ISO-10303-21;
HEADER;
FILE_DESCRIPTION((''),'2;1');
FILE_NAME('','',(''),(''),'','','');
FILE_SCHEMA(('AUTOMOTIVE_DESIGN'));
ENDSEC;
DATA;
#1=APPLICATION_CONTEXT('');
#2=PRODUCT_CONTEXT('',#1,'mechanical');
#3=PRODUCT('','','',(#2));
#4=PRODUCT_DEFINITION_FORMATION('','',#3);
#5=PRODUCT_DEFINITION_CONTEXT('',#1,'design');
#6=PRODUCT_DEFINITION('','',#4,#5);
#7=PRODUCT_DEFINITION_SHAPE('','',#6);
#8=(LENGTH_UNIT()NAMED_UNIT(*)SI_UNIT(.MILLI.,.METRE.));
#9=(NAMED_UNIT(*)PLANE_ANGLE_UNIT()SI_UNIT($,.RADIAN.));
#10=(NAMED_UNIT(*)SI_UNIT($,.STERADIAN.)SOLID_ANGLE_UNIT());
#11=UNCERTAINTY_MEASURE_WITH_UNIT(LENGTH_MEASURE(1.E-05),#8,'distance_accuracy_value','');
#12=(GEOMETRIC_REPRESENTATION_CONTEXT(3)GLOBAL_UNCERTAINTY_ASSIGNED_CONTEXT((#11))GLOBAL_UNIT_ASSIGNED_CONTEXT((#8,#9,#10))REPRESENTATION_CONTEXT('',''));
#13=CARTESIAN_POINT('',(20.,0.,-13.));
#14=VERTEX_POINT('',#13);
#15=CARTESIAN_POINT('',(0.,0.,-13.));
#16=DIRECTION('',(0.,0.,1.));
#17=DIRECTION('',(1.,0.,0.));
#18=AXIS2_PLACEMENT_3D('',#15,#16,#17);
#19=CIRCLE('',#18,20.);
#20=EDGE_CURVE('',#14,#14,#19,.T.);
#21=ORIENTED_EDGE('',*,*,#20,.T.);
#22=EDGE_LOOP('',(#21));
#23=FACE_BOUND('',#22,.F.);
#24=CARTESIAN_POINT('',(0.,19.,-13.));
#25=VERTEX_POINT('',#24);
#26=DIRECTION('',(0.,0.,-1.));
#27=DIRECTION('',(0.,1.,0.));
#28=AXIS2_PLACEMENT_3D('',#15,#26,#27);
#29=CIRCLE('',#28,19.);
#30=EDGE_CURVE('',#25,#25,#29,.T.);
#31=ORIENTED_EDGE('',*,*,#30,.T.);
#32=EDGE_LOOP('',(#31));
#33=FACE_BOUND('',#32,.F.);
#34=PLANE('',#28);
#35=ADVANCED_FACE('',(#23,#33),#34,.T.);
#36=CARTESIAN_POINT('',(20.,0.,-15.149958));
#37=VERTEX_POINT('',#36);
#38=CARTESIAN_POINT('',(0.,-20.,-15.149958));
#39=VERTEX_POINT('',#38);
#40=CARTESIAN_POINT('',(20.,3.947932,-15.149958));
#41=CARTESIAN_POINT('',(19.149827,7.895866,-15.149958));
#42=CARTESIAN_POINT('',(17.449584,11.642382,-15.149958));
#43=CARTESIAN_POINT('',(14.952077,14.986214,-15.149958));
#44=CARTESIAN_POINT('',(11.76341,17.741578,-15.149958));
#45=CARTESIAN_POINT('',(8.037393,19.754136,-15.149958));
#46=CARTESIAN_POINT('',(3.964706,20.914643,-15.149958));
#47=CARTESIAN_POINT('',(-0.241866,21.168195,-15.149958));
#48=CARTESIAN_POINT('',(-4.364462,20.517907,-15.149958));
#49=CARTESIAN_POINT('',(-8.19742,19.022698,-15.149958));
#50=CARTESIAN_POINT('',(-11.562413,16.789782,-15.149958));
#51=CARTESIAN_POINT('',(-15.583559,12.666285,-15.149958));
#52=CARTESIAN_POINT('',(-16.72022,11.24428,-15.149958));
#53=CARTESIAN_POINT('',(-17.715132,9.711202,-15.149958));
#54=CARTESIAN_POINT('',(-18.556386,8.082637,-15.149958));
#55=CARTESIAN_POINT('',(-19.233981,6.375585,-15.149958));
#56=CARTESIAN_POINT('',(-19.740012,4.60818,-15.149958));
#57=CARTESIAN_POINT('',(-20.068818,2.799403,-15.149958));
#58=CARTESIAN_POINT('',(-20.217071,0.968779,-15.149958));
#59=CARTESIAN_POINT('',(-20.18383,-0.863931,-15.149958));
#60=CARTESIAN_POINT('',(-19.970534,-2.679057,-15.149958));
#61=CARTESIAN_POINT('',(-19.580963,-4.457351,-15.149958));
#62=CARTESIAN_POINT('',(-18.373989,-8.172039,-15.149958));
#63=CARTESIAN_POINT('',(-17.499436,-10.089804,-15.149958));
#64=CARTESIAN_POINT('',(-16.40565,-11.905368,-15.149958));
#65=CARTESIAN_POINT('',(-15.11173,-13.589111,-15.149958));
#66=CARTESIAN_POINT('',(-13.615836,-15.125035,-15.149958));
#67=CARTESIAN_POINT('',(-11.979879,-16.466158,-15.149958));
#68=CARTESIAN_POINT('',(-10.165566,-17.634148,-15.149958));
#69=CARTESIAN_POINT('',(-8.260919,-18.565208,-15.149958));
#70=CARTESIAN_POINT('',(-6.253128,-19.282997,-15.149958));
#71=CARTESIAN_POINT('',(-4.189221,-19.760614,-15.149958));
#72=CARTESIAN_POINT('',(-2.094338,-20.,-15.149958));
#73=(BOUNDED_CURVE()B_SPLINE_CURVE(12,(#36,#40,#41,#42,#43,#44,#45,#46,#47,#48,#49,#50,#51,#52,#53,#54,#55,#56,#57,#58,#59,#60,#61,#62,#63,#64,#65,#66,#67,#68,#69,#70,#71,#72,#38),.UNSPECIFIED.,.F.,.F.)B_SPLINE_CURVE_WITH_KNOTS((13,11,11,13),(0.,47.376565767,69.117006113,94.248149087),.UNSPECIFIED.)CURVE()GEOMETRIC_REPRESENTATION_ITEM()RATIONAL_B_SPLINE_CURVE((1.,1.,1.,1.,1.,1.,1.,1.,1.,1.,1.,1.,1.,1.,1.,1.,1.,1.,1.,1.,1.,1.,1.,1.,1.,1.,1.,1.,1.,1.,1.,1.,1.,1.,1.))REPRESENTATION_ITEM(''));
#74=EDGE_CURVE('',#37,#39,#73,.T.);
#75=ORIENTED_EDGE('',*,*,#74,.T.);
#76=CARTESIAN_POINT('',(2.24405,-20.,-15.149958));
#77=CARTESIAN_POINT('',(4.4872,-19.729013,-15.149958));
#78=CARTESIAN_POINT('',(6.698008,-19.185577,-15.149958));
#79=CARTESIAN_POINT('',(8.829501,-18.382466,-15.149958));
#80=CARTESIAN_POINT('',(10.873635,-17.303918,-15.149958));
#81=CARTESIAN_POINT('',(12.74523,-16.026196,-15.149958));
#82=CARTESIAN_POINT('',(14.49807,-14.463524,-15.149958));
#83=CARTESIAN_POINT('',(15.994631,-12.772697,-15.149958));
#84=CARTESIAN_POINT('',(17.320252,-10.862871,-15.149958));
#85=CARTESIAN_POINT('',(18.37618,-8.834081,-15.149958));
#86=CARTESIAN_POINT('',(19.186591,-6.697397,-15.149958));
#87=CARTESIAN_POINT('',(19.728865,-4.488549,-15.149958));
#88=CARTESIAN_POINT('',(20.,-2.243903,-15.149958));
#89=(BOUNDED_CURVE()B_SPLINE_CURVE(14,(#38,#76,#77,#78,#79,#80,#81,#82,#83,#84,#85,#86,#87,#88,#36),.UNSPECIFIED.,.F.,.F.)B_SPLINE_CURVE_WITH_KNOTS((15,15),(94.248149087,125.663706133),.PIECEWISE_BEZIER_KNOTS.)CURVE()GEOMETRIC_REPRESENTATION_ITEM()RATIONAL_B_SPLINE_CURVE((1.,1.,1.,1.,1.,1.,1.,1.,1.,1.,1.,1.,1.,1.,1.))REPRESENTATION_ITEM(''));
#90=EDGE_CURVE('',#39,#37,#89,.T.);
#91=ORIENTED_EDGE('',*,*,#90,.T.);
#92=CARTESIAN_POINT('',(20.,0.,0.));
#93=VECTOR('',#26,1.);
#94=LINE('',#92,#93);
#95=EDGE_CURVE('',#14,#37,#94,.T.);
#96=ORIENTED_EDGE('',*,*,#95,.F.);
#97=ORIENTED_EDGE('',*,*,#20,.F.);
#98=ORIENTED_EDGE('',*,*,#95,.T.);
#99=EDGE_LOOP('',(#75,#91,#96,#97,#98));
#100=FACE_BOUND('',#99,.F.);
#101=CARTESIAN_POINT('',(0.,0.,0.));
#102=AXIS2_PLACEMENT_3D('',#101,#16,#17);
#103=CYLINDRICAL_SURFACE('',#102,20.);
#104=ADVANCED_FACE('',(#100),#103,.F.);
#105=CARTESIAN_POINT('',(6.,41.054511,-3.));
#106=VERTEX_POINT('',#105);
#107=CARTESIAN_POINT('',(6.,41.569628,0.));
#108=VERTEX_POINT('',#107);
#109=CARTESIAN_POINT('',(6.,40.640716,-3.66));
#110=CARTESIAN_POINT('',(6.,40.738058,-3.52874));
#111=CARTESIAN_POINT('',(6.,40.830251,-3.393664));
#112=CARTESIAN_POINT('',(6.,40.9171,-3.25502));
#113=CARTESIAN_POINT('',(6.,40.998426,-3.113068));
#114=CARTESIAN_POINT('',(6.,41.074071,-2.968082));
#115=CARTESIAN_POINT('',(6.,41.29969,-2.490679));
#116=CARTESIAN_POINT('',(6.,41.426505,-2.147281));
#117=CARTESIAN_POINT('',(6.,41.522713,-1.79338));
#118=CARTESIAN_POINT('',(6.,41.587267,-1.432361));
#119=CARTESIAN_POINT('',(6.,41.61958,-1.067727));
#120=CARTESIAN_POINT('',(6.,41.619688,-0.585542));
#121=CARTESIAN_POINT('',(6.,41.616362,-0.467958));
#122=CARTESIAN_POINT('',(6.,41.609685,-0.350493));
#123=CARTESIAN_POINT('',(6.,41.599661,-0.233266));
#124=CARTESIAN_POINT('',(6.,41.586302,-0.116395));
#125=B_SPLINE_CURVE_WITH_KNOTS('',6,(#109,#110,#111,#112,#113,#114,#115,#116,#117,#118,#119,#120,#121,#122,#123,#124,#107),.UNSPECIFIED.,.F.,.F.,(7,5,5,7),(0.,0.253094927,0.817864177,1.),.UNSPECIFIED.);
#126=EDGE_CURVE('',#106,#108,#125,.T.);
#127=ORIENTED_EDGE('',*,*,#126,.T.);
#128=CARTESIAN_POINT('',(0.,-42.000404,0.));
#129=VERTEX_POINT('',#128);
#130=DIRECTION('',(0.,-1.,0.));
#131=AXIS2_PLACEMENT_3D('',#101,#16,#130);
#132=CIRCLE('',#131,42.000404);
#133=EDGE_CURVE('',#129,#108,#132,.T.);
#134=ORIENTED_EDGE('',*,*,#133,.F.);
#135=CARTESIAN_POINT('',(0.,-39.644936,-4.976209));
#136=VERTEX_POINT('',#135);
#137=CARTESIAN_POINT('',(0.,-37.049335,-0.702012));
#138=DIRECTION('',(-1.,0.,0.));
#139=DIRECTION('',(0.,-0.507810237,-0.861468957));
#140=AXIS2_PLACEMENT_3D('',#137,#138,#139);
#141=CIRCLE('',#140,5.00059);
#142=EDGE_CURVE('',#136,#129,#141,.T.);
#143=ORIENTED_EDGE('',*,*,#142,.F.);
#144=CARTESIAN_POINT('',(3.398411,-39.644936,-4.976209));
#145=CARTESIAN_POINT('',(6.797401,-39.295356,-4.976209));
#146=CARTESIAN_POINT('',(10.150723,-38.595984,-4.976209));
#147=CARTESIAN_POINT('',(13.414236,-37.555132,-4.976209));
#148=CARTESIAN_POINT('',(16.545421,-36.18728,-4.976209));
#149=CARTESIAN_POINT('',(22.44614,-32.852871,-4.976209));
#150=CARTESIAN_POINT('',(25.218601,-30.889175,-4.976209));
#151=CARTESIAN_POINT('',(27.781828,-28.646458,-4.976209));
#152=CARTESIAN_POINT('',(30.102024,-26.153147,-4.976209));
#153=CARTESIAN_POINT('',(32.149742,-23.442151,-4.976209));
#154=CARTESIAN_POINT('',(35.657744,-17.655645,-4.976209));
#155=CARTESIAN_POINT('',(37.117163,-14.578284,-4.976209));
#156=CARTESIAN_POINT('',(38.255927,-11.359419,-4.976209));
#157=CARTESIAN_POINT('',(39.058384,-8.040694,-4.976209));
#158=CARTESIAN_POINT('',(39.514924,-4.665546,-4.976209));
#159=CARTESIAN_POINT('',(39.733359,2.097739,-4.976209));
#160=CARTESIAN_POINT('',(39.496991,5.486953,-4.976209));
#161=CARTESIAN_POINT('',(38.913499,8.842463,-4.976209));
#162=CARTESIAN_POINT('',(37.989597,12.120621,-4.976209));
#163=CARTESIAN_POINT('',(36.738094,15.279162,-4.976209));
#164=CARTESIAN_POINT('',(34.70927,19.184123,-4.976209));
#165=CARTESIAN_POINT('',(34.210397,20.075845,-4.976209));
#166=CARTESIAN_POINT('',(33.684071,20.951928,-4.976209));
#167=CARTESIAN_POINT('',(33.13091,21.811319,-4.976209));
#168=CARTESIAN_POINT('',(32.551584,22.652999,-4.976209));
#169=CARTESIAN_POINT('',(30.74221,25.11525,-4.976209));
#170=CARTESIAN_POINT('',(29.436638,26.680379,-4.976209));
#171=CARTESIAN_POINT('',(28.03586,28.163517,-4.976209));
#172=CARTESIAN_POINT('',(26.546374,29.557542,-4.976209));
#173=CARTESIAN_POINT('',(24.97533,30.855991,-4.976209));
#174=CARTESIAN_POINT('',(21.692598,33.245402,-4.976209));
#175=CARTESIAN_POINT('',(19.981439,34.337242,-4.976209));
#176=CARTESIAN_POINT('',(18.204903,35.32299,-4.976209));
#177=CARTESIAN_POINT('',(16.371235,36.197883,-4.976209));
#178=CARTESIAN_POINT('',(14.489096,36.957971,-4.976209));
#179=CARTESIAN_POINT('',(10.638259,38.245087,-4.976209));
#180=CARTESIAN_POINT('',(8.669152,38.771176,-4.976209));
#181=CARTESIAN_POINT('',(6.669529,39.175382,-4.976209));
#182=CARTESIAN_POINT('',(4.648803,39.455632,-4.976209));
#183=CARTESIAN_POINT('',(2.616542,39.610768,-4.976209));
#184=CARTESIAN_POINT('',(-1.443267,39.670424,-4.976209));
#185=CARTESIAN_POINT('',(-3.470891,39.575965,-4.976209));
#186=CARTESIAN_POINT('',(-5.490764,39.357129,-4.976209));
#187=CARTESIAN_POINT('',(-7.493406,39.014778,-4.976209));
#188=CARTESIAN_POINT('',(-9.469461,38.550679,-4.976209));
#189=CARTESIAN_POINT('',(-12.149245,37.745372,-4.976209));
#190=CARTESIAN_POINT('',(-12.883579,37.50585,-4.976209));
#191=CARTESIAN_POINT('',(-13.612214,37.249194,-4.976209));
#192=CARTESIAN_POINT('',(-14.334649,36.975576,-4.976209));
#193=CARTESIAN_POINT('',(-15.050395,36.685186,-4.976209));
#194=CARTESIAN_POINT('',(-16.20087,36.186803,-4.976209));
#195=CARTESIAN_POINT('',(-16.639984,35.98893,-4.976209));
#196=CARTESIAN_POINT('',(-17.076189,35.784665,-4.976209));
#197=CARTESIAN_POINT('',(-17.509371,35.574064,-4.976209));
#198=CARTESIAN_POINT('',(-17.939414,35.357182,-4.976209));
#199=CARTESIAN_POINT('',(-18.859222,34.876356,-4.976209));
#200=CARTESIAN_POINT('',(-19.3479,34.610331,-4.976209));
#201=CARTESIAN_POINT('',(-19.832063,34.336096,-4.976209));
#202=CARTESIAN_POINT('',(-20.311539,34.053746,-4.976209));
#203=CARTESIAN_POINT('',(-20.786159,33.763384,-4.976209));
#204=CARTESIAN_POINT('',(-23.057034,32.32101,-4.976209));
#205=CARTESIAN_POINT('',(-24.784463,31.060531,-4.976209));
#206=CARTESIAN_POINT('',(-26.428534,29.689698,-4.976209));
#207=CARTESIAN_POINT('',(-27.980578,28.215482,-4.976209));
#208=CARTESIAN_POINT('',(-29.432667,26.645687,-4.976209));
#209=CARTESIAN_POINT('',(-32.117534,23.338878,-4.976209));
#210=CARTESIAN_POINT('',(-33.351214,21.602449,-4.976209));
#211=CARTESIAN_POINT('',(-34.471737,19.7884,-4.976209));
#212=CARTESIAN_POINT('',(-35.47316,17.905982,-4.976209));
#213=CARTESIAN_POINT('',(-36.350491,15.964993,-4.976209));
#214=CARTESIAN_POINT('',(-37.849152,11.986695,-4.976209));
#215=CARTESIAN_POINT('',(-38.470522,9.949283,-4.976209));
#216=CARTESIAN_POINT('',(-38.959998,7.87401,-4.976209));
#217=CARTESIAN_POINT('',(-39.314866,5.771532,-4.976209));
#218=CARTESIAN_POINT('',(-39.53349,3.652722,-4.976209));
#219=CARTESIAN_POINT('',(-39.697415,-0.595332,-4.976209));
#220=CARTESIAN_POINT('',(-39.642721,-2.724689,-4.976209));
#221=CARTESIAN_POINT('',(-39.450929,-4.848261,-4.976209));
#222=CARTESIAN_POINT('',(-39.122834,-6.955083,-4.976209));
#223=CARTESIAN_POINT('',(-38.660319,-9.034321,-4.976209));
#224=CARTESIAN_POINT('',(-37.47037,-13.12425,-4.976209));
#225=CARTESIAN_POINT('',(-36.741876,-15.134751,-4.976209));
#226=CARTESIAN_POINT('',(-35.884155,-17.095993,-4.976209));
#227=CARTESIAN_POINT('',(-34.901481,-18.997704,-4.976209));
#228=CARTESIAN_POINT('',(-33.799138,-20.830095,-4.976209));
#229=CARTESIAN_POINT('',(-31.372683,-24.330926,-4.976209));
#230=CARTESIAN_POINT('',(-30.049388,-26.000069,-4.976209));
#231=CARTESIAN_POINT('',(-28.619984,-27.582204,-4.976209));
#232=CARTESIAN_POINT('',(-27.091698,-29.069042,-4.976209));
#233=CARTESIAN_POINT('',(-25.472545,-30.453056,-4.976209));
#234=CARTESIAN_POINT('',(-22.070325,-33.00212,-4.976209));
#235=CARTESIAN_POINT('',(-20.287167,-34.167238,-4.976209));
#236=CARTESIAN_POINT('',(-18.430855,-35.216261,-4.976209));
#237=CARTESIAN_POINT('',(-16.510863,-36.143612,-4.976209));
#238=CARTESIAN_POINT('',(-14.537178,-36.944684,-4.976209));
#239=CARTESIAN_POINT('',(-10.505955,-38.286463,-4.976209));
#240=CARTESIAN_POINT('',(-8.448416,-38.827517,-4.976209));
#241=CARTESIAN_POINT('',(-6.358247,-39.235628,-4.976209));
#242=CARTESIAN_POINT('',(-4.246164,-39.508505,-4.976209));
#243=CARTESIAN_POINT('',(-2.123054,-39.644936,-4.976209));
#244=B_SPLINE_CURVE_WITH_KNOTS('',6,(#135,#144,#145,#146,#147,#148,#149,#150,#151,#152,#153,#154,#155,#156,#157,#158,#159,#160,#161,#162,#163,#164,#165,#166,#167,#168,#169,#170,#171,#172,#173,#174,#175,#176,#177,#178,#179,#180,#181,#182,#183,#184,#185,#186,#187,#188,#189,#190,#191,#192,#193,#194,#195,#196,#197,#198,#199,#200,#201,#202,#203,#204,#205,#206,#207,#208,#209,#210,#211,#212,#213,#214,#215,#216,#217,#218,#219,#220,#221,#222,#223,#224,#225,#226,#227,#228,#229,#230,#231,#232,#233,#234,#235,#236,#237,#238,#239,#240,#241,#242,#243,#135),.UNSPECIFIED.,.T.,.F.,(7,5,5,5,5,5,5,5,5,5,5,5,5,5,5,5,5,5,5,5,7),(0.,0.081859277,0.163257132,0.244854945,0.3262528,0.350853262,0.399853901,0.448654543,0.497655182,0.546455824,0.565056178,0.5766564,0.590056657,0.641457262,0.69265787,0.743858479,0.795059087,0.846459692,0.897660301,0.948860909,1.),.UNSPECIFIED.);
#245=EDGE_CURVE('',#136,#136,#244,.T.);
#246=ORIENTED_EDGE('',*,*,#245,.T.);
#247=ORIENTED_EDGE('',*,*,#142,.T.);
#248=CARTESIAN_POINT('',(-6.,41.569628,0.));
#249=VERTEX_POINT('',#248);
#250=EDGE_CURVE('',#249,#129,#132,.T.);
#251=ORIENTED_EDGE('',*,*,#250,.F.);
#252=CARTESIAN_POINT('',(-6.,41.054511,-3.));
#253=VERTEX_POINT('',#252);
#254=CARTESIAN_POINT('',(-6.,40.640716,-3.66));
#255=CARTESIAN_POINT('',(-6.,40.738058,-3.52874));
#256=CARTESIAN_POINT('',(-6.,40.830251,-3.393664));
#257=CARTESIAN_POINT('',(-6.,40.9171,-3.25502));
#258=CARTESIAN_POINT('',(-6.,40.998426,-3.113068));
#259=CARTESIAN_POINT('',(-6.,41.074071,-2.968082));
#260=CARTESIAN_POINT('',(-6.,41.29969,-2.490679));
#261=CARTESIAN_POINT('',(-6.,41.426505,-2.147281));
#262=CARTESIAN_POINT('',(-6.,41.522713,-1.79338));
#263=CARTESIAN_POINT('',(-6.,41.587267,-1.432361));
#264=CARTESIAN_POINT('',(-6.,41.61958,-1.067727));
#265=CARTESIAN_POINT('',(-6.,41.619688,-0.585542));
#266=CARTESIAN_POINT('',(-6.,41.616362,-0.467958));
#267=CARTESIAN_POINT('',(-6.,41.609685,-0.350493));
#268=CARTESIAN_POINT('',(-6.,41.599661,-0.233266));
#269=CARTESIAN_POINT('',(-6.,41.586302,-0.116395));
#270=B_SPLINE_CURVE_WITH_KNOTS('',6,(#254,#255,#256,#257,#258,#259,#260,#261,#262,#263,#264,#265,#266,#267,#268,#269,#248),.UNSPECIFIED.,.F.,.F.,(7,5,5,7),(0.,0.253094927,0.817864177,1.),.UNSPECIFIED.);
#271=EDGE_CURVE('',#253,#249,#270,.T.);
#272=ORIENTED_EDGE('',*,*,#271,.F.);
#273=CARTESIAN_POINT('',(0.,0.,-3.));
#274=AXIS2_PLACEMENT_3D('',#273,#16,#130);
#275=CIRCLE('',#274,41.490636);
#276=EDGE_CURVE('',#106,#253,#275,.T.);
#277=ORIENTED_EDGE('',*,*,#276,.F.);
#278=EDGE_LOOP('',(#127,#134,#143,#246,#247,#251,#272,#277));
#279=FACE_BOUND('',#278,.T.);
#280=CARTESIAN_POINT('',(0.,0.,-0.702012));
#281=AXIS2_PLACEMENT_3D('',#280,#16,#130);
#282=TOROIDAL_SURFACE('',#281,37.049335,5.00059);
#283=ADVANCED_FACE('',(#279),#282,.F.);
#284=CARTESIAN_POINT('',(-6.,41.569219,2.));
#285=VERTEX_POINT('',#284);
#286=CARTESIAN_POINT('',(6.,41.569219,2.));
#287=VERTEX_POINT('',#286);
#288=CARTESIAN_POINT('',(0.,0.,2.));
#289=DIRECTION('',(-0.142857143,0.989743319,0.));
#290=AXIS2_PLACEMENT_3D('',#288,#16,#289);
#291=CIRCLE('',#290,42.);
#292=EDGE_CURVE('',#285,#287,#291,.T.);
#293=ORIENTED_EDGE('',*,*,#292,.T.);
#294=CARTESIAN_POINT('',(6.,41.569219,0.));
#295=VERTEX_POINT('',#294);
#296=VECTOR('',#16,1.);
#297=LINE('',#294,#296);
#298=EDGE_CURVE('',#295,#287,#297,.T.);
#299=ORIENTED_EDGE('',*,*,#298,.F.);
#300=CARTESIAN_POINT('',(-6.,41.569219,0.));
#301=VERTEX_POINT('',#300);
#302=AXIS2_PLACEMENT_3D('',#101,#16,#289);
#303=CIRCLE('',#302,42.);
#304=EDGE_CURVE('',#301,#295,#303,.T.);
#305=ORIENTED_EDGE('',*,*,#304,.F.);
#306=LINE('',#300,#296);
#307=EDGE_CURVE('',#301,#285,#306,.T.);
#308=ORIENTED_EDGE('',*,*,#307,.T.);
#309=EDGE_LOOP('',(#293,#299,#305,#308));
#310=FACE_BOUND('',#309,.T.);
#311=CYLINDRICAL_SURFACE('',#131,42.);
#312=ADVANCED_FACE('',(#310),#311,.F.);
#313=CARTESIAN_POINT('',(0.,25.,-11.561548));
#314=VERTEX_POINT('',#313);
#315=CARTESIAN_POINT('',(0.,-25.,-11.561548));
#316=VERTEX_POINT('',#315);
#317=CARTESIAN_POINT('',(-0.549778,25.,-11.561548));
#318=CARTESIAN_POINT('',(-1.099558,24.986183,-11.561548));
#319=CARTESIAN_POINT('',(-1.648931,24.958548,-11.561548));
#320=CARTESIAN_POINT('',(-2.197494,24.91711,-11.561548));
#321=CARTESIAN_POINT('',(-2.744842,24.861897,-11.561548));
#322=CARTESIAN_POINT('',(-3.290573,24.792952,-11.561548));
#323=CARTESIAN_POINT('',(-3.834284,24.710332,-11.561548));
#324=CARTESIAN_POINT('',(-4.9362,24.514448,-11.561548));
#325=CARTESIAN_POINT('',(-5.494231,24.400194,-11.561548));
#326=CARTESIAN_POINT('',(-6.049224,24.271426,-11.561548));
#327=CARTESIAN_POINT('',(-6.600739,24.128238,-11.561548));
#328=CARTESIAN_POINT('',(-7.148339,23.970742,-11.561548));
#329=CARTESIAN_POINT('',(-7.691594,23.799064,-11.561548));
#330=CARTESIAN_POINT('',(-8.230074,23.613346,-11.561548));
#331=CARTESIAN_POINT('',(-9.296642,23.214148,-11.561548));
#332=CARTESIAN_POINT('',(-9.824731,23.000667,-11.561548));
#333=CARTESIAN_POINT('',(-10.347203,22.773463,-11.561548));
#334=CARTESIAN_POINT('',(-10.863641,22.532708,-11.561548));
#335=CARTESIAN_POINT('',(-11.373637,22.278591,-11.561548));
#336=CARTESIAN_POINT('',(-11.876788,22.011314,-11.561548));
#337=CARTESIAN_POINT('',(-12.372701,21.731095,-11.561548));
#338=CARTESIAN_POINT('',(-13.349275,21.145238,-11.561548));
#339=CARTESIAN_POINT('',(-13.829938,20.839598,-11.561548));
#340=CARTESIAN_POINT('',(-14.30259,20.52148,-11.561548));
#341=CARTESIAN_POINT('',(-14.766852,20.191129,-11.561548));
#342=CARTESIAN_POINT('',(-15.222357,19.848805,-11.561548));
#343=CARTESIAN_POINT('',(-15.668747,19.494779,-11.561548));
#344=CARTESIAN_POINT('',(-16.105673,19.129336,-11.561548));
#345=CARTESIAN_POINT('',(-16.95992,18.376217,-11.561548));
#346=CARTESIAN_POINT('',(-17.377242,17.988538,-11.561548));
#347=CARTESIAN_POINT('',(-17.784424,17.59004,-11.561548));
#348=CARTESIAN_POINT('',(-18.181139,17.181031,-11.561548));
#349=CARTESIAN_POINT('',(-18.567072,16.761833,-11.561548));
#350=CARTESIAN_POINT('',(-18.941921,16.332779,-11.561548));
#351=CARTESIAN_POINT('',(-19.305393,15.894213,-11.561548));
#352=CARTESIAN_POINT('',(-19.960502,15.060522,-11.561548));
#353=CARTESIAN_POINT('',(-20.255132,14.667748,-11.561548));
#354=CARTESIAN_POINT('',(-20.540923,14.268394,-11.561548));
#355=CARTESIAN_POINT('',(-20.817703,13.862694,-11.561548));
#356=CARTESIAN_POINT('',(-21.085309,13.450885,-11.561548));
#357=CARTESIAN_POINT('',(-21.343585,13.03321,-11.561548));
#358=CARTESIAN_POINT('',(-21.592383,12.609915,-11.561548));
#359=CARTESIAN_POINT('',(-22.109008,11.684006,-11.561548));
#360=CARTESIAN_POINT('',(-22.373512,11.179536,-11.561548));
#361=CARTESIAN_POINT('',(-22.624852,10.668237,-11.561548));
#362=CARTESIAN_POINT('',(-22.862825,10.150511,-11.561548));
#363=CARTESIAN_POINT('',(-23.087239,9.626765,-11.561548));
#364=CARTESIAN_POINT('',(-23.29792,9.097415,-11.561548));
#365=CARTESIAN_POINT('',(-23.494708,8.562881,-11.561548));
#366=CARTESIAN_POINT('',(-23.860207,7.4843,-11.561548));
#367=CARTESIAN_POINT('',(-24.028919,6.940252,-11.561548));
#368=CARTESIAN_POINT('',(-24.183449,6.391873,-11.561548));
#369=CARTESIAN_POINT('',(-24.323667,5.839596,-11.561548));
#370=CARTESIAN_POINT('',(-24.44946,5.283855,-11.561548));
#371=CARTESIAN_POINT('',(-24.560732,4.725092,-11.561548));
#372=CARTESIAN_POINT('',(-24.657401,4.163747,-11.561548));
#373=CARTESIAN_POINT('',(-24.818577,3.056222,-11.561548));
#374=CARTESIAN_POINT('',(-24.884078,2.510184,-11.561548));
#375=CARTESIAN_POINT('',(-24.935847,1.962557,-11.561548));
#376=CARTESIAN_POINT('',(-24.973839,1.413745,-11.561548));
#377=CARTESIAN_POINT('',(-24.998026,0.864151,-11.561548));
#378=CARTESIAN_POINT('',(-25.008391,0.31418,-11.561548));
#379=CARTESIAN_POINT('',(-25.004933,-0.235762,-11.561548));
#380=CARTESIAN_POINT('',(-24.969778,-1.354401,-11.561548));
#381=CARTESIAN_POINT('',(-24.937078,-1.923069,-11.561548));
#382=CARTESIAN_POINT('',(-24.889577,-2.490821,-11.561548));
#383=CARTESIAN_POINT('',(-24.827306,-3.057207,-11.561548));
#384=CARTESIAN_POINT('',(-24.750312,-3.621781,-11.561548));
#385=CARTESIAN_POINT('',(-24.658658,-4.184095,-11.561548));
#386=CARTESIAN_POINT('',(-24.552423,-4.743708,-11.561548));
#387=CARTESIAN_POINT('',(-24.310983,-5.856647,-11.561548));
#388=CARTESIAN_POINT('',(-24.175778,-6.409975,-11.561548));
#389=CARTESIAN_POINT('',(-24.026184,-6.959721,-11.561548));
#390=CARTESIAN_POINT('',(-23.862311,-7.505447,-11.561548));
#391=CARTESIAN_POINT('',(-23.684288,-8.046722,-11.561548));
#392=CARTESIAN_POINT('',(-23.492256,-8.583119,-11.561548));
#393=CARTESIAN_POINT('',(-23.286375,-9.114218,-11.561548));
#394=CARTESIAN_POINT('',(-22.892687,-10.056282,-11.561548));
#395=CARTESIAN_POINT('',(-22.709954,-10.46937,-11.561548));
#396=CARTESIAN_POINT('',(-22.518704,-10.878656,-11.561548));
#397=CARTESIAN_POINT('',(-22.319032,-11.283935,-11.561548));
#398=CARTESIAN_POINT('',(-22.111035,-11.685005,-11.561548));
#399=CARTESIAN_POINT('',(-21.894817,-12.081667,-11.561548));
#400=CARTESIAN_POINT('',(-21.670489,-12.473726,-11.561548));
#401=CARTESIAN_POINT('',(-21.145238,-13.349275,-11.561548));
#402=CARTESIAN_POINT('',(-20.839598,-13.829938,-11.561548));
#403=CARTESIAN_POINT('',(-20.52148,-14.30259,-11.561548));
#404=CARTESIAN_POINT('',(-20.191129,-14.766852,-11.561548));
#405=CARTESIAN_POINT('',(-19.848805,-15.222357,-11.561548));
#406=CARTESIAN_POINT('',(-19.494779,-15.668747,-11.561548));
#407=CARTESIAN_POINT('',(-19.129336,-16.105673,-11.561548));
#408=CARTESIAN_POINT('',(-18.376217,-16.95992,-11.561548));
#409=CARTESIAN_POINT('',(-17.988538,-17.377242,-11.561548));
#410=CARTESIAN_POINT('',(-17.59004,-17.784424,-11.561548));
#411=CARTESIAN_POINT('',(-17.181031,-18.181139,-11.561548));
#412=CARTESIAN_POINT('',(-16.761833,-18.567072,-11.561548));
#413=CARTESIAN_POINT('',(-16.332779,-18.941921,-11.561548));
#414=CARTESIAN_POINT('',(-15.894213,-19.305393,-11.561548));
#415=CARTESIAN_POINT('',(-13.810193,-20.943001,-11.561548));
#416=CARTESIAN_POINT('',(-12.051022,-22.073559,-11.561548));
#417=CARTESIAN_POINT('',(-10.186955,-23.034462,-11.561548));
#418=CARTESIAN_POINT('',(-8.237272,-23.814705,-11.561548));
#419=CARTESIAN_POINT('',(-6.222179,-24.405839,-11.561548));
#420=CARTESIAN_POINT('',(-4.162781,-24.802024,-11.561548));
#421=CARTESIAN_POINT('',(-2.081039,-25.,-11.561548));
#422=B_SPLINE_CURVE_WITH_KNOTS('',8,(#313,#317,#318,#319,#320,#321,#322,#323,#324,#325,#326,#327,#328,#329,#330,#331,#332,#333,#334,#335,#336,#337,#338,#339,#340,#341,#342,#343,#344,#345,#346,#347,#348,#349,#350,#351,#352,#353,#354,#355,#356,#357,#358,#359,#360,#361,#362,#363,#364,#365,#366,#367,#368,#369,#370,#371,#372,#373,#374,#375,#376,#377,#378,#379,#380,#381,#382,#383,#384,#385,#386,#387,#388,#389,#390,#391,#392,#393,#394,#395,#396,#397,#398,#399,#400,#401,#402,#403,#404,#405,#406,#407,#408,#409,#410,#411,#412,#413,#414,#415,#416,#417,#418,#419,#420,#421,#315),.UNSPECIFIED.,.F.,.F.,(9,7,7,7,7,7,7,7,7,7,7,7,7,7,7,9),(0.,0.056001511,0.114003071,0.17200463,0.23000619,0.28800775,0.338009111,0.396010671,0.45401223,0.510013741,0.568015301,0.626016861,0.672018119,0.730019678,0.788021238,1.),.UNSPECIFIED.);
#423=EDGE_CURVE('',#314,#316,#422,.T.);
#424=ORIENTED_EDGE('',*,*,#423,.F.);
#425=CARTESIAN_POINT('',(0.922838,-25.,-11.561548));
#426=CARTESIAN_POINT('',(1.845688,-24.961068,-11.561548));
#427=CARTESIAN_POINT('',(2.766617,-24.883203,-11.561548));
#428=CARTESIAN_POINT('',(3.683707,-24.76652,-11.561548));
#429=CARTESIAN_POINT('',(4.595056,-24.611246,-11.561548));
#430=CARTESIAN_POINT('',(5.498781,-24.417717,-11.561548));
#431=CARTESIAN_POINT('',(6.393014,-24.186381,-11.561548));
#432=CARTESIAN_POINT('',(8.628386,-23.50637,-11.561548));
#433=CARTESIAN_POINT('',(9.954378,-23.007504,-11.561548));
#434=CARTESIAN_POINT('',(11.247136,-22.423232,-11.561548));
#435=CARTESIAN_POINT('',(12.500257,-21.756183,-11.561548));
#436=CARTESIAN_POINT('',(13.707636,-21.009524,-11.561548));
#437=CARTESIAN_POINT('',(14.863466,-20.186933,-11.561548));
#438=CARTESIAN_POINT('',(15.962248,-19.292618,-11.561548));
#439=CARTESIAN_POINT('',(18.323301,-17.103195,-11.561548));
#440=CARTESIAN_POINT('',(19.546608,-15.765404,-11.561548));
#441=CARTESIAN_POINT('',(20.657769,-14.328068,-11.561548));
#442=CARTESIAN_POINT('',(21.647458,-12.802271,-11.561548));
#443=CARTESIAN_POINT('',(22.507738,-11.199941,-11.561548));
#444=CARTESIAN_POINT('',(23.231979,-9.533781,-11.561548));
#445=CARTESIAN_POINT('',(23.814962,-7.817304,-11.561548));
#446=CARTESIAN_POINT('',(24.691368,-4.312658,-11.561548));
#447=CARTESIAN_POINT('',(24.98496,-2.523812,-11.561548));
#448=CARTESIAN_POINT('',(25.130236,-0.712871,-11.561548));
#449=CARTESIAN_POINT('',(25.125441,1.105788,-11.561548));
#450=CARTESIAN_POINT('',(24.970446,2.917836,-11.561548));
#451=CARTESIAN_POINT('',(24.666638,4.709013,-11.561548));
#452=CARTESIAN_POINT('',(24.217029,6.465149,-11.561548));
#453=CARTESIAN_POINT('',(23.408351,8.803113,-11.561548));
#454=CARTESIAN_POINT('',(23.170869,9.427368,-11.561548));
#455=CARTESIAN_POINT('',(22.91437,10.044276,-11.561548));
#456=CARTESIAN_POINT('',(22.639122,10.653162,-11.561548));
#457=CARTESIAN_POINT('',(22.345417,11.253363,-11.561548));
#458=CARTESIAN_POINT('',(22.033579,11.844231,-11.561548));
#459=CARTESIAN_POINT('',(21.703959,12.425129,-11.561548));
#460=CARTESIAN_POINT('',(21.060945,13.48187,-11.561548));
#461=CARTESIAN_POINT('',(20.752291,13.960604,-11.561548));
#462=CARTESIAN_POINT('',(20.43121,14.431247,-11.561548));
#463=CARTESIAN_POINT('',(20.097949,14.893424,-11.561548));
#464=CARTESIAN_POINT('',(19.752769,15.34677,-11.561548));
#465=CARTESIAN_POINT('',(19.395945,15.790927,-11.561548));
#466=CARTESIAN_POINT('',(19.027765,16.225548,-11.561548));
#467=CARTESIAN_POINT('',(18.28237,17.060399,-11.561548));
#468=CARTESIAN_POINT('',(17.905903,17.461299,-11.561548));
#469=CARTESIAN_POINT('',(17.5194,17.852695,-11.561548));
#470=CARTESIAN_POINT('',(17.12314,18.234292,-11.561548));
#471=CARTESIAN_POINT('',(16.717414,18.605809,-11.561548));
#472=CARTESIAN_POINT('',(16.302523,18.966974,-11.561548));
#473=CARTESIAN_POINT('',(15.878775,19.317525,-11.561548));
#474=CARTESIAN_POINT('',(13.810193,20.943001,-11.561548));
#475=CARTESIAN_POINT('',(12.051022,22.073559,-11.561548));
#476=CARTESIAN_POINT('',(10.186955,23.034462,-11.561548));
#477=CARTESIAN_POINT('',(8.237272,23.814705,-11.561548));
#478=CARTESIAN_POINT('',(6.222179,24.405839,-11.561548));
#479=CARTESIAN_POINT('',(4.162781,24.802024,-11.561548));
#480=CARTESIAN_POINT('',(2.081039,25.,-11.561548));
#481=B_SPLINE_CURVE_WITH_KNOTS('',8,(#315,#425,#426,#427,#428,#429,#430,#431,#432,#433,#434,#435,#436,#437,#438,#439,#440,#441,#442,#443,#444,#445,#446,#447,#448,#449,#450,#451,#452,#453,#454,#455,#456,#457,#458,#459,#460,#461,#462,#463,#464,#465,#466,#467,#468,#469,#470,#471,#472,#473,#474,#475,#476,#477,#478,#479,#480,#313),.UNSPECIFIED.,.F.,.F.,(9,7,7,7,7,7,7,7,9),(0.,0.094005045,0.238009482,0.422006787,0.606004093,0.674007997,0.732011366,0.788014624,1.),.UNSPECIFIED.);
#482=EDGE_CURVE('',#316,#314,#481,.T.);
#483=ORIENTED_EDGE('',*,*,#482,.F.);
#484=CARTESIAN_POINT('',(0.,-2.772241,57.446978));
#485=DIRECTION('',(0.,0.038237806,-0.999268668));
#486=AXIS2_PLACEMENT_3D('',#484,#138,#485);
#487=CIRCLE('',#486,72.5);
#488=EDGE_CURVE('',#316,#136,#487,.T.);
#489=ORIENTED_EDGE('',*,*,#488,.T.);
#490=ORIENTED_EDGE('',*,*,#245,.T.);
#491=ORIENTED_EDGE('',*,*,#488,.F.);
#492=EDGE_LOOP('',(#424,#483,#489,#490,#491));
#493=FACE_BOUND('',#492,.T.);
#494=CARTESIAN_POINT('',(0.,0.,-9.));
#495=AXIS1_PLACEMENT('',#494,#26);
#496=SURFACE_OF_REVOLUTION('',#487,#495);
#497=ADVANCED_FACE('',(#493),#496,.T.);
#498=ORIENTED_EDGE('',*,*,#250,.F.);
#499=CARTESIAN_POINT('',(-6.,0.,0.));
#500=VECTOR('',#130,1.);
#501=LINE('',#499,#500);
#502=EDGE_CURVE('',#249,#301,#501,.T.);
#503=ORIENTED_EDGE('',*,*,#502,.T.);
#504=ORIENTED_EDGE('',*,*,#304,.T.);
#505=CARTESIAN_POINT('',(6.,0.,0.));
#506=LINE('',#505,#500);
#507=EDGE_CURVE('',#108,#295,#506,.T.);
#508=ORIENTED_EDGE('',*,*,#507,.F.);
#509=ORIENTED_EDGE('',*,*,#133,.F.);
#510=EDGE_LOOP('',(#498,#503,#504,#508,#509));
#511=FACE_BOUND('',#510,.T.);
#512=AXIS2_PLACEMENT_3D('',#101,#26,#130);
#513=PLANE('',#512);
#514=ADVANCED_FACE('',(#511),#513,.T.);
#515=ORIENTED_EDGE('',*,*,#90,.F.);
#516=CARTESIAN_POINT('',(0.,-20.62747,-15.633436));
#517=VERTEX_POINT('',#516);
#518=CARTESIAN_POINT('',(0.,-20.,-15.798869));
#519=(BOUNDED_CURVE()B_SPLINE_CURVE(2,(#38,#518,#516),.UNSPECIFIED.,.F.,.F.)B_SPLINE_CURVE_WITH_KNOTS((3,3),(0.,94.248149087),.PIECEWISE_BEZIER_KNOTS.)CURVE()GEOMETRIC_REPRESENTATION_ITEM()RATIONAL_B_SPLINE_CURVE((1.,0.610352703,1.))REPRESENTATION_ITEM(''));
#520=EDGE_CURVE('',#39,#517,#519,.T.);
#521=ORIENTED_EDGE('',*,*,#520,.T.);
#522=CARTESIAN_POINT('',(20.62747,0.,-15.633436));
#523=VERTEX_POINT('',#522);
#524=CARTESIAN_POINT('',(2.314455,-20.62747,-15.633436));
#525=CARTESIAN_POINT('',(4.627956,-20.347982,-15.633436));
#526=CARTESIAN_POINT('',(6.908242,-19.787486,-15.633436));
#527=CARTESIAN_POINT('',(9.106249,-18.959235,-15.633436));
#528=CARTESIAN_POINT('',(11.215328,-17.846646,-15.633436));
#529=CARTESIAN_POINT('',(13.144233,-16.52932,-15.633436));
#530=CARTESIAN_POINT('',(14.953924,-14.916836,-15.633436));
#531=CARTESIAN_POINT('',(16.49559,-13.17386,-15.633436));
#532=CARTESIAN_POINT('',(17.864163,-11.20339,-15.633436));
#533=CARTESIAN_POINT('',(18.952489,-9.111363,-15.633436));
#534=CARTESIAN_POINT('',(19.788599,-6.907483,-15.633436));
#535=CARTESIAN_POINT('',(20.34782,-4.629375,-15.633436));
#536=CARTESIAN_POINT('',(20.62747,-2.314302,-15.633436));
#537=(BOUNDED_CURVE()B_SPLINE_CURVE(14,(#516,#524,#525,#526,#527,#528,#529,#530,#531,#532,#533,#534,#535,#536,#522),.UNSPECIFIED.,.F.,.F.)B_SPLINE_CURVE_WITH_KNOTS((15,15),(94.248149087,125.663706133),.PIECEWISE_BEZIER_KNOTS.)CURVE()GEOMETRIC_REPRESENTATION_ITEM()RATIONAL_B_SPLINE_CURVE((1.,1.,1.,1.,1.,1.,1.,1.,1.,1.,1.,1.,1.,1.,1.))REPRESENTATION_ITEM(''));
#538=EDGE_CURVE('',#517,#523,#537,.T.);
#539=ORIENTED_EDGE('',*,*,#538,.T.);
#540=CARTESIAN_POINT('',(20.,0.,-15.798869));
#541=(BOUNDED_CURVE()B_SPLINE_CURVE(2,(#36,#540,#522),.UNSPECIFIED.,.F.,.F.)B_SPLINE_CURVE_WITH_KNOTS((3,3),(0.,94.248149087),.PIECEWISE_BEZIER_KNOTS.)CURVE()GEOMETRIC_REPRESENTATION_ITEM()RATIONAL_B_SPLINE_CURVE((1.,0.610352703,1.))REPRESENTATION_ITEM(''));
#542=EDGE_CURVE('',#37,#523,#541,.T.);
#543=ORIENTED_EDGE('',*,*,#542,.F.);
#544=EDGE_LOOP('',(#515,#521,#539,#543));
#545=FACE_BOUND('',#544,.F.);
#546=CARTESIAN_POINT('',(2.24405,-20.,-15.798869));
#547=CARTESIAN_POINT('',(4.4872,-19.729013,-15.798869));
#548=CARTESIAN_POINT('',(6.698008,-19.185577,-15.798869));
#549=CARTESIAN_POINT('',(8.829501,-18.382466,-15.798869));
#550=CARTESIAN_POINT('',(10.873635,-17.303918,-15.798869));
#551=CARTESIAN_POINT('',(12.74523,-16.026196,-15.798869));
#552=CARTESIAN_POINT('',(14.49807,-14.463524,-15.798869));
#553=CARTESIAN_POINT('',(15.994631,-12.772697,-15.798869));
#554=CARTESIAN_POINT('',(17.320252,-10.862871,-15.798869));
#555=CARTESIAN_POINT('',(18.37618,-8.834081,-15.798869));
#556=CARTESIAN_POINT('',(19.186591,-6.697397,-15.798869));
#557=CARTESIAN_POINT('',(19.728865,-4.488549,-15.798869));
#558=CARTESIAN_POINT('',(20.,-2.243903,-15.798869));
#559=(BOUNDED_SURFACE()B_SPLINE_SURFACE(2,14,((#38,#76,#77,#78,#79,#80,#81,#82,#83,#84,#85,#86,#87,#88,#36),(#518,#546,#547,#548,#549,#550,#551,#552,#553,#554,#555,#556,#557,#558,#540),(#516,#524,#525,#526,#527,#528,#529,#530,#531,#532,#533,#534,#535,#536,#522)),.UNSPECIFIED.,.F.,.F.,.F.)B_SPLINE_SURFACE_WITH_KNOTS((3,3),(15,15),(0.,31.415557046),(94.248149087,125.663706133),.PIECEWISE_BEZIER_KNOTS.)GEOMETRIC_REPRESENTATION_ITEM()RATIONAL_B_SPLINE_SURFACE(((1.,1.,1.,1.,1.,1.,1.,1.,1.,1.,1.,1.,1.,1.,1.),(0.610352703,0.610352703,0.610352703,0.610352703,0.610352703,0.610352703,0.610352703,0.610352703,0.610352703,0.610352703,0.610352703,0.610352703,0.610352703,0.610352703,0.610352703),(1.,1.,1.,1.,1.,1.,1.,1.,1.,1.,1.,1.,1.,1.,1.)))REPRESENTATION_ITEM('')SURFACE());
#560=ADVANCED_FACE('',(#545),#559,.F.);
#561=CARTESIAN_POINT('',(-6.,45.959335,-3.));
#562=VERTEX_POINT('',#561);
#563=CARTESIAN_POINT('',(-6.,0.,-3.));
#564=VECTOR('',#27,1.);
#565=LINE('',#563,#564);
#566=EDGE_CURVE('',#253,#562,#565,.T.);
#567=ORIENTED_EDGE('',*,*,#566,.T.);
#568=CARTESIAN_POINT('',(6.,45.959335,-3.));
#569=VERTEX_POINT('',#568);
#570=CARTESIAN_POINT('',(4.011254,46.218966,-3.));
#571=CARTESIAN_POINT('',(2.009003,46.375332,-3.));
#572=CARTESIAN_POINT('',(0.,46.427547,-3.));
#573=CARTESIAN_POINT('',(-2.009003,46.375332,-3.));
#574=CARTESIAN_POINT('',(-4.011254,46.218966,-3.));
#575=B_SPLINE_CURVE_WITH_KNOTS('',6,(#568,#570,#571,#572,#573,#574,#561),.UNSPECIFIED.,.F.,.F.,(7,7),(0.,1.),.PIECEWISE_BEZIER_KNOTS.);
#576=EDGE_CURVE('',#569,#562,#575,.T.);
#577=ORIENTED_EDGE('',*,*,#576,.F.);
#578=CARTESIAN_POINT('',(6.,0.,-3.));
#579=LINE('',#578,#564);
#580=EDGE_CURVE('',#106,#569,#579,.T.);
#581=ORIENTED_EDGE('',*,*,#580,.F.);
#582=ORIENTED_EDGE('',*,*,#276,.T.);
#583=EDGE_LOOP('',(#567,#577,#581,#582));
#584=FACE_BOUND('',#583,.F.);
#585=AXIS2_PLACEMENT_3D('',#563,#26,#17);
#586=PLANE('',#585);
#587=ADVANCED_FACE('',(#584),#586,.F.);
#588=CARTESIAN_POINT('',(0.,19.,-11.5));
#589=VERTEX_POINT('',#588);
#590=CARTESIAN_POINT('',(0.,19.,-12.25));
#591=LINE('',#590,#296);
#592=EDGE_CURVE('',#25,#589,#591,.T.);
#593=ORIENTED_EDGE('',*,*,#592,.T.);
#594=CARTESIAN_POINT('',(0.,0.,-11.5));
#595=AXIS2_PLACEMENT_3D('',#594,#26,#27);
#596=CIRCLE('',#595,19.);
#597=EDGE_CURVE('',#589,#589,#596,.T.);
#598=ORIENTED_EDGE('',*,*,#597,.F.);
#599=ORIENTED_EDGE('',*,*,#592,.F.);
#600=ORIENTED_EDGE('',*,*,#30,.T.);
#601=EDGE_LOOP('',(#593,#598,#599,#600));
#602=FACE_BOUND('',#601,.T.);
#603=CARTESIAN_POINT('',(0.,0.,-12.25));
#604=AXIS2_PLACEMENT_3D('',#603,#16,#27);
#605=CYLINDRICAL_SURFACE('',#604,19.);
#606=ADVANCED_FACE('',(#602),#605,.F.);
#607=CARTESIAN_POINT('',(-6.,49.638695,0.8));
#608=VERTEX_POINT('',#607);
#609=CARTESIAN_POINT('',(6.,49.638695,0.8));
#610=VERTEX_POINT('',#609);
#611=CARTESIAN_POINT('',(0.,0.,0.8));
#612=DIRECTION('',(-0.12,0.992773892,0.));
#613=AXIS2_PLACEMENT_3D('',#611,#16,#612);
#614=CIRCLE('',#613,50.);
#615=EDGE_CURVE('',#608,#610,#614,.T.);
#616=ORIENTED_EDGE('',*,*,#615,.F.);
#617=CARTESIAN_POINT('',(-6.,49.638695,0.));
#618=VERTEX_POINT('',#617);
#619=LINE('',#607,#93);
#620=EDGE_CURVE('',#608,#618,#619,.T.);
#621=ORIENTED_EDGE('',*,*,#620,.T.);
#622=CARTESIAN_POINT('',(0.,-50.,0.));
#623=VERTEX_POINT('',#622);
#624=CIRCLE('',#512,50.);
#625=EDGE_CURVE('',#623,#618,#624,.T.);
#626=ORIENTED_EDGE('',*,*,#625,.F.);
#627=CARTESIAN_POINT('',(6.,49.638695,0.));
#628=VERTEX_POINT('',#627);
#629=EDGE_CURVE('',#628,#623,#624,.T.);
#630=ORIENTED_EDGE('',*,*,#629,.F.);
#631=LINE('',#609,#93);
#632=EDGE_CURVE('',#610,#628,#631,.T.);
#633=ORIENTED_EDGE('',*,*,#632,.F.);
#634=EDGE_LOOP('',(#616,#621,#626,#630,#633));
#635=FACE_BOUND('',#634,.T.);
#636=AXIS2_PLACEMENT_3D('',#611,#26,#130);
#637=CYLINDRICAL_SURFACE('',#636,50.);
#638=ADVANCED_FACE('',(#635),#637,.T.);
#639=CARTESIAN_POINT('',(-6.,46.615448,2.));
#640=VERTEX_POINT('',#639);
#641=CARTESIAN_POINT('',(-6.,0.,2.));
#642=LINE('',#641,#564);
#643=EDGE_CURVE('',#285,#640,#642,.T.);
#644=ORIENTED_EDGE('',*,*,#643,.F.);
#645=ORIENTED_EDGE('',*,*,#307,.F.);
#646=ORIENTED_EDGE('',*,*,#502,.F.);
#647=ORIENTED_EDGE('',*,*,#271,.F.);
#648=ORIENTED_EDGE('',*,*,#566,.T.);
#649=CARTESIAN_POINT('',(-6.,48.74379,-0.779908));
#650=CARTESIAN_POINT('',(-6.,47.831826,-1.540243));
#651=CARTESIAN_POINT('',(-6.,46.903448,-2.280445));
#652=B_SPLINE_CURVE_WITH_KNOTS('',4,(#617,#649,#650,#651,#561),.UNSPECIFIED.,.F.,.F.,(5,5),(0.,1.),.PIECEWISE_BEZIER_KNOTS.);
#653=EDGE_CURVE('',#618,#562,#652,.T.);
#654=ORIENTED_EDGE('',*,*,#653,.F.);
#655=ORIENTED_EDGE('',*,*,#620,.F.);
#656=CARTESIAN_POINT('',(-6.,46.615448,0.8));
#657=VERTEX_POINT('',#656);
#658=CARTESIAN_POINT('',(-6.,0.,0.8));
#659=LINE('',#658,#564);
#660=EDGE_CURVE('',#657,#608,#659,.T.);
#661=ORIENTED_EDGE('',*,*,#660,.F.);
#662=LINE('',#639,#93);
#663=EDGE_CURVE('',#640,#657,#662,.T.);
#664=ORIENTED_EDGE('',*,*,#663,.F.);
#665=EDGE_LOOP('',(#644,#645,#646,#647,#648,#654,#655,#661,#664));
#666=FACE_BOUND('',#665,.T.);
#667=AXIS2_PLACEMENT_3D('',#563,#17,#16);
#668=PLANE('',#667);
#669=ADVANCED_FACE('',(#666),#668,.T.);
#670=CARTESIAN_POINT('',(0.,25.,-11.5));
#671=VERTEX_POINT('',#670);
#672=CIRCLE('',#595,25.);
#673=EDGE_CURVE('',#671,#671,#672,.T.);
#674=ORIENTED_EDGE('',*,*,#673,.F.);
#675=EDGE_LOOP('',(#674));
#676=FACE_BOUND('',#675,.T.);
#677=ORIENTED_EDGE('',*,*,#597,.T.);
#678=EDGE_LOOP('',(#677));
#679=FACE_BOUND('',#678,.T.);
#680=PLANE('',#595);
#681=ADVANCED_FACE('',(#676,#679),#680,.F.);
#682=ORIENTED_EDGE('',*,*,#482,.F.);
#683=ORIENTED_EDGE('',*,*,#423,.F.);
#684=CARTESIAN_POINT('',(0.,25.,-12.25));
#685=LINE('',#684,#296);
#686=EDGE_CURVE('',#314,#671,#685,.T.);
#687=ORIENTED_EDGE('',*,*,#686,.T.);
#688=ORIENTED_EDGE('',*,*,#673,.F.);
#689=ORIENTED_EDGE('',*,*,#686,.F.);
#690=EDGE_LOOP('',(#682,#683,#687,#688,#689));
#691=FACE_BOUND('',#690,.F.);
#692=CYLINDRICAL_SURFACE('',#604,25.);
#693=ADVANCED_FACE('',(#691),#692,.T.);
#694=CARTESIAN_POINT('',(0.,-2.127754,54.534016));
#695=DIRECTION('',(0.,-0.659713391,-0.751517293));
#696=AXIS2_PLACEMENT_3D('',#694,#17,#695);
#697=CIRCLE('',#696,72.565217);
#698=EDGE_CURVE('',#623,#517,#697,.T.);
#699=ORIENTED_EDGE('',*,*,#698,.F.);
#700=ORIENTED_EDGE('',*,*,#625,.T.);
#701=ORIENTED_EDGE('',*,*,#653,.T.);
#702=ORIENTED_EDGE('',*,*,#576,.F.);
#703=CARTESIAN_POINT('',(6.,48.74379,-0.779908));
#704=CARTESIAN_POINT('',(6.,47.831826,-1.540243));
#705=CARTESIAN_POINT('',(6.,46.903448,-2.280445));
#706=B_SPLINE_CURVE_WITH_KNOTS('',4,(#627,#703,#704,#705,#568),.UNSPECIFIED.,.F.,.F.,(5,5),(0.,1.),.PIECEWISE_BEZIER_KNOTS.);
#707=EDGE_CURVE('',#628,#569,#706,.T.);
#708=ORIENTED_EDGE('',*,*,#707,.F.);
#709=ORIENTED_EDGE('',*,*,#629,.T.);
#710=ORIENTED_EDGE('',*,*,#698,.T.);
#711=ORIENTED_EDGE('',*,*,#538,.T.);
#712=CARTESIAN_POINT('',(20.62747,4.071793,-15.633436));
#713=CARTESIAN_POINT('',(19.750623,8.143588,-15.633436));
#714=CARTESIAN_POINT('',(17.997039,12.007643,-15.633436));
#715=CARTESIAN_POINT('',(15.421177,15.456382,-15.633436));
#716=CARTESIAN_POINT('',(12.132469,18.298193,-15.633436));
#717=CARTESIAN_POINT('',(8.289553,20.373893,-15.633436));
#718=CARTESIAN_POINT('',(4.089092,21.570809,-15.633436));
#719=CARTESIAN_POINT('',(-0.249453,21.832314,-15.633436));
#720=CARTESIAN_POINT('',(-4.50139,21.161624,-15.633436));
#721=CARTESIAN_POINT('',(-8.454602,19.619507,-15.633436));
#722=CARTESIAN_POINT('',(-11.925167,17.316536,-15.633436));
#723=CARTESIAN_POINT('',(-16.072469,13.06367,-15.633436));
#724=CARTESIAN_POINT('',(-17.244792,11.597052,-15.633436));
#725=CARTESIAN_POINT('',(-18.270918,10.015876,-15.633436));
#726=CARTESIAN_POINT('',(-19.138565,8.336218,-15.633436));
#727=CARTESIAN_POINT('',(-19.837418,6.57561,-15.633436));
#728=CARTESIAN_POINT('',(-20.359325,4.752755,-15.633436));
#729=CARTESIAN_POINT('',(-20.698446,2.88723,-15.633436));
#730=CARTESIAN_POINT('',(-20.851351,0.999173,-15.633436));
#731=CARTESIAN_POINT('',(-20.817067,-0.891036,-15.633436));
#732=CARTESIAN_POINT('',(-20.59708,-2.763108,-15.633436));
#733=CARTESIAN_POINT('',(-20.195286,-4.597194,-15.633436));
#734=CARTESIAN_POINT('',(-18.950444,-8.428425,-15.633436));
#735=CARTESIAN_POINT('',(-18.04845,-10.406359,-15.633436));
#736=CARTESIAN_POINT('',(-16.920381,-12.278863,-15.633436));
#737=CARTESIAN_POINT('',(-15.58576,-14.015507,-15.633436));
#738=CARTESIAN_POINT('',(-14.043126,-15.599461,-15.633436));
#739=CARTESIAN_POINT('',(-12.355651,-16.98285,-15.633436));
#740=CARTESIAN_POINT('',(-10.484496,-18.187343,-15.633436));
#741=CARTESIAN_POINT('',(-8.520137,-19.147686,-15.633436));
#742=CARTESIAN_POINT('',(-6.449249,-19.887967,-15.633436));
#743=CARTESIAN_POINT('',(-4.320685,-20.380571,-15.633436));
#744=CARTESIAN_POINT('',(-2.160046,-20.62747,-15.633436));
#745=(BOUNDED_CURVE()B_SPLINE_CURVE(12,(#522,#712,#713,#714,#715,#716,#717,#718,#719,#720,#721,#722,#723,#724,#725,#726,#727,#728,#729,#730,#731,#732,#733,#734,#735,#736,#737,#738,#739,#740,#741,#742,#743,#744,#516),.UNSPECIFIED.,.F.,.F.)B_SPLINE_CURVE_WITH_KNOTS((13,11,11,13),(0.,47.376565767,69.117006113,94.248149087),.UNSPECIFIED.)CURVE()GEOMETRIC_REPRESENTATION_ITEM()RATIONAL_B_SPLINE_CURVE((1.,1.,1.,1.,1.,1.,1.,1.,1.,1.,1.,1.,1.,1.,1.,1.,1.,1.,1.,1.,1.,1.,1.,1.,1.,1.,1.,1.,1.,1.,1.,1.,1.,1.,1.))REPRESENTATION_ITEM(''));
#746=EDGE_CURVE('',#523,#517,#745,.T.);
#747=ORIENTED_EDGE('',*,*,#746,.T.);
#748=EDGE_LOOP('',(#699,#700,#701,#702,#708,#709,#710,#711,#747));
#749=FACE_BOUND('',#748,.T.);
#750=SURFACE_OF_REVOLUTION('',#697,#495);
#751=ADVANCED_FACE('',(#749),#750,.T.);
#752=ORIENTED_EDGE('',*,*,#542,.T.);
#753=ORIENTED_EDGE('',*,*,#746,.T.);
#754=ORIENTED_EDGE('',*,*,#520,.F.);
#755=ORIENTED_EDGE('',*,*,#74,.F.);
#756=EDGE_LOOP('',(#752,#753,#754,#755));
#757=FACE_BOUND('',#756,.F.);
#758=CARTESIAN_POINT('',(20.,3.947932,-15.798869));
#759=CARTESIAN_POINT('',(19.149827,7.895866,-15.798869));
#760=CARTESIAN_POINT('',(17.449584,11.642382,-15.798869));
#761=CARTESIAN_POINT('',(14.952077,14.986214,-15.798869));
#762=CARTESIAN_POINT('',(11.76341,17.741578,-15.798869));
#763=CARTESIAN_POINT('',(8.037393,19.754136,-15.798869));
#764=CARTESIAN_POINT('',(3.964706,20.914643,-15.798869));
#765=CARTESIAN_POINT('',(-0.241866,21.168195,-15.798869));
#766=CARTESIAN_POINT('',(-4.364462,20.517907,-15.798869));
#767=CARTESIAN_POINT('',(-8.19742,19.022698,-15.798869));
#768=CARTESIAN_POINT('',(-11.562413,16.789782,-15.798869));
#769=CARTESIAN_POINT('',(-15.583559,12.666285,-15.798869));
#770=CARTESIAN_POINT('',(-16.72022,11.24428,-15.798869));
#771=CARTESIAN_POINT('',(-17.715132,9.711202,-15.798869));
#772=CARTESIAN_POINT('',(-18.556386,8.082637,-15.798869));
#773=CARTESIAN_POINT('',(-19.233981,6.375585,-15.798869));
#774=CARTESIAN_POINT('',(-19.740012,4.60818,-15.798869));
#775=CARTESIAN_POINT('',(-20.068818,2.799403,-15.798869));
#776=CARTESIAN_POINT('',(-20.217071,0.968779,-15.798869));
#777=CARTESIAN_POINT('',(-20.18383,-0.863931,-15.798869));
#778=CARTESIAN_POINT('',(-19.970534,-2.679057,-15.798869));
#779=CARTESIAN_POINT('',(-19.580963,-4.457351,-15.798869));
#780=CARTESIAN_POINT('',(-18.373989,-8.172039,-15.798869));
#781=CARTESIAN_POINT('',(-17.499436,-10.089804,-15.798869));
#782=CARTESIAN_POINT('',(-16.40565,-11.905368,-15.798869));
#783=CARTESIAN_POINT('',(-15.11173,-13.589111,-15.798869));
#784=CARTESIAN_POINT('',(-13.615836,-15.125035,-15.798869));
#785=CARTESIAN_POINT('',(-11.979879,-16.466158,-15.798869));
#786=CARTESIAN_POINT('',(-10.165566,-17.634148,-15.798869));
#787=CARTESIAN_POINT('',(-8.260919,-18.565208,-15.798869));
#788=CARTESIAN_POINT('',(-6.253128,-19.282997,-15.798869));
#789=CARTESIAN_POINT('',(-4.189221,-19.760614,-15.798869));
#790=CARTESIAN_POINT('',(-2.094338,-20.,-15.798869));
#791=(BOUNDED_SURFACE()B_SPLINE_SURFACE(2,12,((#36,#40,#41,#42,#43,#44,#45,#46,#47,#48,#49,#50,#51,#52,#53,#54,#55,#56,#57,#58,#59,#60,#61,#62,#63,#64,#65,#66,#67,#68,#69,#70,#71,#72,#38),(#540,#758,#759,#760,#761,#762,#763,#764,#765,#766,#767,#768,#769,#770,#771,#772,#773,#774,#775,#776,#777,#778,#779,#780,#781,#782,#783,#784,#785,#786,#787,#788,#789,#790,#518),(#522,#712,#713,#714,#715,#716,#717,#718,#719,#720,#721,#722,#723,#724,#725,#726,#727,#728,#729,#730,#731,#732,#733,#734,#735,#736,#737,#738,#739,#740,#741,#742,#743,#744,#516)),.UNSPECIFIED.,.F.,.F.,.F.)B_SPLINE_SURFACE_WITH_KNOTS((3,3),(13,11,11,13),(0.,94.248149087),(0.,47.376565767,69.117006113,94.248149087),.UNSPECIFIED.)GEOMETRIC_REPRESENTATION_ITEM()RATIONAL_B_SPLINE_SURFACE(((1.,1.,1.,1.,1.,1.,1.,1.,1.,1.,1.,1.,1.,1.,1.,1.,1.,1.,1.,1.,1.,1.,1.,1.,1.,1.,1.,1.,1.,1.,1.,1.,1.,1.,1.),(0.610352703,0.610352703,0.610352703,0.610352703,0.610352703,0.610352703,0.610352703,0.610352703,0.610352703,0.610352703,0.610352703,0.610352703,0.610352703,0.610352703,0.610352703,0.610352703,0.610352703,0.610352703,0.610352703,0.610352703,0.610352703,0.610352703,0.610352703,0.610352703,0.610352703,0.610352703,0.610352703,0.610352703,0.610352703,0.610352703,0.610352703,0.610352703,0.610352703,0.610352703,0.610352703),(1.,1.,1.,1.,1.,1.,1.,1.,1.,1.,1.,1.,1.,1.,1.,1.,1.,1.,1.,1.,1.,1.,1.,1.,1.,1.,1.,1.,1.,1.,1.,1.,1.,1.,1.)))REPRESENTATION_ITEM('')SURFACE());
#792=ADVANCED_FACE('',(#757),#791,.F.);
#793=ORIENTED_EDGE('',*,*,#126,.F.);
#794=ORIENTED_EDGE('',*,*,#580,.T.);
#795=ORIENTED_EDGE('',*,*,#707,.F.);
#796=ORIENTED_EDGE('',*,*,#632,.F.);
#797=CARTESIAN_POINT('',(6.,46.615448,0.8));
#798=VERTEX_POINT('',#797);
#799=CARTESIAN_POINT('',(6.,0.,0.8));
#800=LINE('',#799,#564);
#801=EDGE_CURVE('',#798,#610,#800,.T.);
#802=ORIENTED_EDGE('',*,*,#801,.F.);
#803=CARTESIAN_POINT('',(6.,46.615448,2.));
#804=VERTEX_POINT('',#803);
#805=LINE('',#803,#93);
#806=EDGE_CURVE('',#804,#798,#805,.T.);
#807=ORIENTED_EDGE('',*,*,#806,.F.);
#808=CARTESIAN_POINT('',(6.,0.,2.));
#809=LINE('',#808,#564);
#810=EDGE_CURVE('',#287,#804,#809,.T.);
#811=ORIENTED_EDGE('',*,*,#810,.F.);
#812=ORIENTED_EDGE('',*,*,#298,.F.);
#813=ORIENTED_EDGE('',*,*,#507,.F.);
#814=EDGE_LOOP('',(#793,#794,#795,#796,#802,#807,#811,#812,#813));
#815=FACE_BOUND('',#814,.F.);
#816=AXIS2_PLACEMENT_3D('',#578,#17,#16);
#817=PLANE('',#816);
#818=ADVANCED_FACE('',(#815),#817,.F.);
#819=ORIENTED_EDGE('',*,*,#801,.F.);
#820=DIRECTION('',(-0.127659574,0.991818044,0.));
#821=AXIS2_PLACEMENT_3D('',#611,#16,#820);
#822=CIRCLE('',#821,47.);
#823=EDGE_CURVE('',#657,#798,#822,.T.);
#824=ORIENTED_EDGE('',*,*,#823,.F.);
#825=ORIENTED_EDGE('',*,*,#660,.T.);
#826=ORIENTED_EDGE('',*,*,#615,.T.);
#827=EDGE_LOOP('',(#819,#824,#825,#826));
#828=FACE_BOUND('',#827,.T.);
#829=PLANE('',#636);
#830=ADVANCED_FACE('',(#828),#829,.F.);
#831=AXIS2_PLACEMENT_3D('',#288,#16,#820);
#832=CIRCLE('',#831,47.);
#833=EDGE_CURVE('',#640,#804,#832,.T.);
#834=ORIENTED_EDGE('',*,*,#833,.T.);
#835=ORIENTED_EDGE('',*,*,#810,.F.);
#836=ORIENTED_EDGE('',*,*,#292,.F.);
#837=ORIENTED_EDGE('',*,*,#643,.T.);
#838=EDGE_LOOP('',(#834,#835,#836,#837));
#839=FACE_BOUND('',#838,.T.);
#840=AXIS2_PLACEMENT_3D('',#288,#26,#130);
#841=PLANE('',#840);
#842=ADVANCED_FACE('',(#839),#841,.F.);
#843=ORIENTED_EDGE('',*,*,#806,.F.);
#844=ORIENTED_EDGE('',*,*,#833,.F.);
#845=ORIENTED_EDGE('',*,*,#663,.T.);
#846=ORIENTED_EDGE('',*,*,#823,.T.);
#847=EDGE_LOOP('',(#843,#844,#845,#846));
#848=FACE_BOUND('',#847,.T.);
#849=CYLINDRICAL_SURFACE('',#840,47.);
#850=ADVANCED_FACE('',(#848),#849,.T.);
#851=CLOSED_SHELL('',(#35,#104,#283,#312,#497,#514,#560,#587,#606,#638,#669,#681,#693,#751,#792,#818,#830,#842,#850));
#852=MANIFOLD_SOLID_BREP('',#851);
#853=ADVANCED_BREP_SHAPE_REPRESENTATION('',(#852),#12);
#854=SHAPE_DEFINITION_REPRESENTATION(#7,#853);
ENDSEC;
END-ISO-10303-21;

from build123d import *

# Parameters (mm, degrees)
F2_R     = 20
F3_DEPTH = 25
F4_R     = 2.5
F5_DEPTH = 25
F7_W     = 12
F7_H     = 6.6
F8_DEPTH = 60
F10_R    = 0.5
F9_W     = 6
F9_H     = 1.5


# Not quite as in the source:
# - a fillet or chamfer that OpenCascade refuses, or shapes differently, is made with other operations: its cross-section is extruded or revolved along the edge and cut away or added
# - a feature names something its author has since deleted; it is built from what else it names


with BuildPart() as f1:
    # F0 (on Right) → F1 (revolve)
    with BuildSketch(Plane.YZ):
        with BuildLine():
            ThreePointArc((0, -15), (-24.8151535342, -11.6208144071), (-47, 0))
            Line((-47, 0), (-42, 0))
            Line((-42, 0), (-42, 2))
            Line((-42, 2), (-47, 2))
            Line((-47, 2), (-47, 0.8))
            Line((-47, 0.8), (-50, 0.8))
            Line((-50, 0.8), (-50, 0))
            ThreePointArc((-50, 0), (-26.7070061906, -13.7416838627), (0, -18))
            Line((0, -18), (0, -15))
        make_face()
    revolve(axis=Axis((0, 0, -9), (0, 0, -1)))

    # F2 (on Top) → F3 (cut)
    with BuildSketch(Plane.XY):
        Circle(F2_R)
    extrude(amount=-F3_DEPTH, mode=Mode.SUBTRACT)

    # F4 (on Top) → F5 (cut)
    with BuildSketch(Plane.XY):
        with Locations((0, -26)):
            Circle(F4_R)
        with Locations((-22.5166604984, 13)):
            Circle(F4_R)
        with Locations((22.5166604984, 13)):
            Circle(F4_R)
    extrude(amount=F5_DEPTH, mode=Mode.SUBTRACT)

    # F6: fillet of radius 5 on 1 edges, made by hand

    # F6_s1 → F6_t2 (revolve)
    with BuildSketch(Plane.YZ):
        with BuildLine():
            ThreePointArc((-39.5886862508, -5.0098655294), (-41.5550423226, -2.8709998558), (-42.0003960381, 5.61589e-05))
            Line((-42.0003960381, 5.61589e-05), (-42.4955021036, 0.0702630102))
            ThreePointArc((-42.4955021036, 0.0702630102), (-44.5001980191, 0.5000590146), (-47, 0.5000590146))
            Line((-47, 0.5000590146), (-47.3050550292, -0.3962328195))
            ThreePointArc((-47.3050550292, -0.3962328195), (-43.6515985166, -3.0334873639), (-39.8426213376, -5.4406508469))
            Line((-39.8426213376, -5.4406508469), (-39.5886862508, -5.0098655294))
        make_face()
    revolve(axis=Axis((0, 0, 0), (0, 0, -1)))

    # F7 (on Front) → F8 (cut)
    with BuildSketch(Plane.XZ):
        with Locations((0, 0.3)):
            Rectangle(F7_W, F7_H)
    extrude(amount=-F8_DEPTH, mode=Mode.SUBTRACT)

    # F10
    f10_edges = [f1.edges().sort_by_distance(p)[0] for p in [
        (-14.142136, 14.142136, -15.795876),
        (14.142136, -14.142136, -15.795876),
    ]]
    fillet(f10_edges, radius=F10_R)

    # F9 (on Right) → F11 (revolve)
    with BuildSketch(Plane.YZ):
        with Locations((22, -12.25)):
            Rectangle(F9_W, F9_H)
    revolve(axis=Axis((0, 0, -5.7836989872), (0, 0, -1)))


solid = f1.part
